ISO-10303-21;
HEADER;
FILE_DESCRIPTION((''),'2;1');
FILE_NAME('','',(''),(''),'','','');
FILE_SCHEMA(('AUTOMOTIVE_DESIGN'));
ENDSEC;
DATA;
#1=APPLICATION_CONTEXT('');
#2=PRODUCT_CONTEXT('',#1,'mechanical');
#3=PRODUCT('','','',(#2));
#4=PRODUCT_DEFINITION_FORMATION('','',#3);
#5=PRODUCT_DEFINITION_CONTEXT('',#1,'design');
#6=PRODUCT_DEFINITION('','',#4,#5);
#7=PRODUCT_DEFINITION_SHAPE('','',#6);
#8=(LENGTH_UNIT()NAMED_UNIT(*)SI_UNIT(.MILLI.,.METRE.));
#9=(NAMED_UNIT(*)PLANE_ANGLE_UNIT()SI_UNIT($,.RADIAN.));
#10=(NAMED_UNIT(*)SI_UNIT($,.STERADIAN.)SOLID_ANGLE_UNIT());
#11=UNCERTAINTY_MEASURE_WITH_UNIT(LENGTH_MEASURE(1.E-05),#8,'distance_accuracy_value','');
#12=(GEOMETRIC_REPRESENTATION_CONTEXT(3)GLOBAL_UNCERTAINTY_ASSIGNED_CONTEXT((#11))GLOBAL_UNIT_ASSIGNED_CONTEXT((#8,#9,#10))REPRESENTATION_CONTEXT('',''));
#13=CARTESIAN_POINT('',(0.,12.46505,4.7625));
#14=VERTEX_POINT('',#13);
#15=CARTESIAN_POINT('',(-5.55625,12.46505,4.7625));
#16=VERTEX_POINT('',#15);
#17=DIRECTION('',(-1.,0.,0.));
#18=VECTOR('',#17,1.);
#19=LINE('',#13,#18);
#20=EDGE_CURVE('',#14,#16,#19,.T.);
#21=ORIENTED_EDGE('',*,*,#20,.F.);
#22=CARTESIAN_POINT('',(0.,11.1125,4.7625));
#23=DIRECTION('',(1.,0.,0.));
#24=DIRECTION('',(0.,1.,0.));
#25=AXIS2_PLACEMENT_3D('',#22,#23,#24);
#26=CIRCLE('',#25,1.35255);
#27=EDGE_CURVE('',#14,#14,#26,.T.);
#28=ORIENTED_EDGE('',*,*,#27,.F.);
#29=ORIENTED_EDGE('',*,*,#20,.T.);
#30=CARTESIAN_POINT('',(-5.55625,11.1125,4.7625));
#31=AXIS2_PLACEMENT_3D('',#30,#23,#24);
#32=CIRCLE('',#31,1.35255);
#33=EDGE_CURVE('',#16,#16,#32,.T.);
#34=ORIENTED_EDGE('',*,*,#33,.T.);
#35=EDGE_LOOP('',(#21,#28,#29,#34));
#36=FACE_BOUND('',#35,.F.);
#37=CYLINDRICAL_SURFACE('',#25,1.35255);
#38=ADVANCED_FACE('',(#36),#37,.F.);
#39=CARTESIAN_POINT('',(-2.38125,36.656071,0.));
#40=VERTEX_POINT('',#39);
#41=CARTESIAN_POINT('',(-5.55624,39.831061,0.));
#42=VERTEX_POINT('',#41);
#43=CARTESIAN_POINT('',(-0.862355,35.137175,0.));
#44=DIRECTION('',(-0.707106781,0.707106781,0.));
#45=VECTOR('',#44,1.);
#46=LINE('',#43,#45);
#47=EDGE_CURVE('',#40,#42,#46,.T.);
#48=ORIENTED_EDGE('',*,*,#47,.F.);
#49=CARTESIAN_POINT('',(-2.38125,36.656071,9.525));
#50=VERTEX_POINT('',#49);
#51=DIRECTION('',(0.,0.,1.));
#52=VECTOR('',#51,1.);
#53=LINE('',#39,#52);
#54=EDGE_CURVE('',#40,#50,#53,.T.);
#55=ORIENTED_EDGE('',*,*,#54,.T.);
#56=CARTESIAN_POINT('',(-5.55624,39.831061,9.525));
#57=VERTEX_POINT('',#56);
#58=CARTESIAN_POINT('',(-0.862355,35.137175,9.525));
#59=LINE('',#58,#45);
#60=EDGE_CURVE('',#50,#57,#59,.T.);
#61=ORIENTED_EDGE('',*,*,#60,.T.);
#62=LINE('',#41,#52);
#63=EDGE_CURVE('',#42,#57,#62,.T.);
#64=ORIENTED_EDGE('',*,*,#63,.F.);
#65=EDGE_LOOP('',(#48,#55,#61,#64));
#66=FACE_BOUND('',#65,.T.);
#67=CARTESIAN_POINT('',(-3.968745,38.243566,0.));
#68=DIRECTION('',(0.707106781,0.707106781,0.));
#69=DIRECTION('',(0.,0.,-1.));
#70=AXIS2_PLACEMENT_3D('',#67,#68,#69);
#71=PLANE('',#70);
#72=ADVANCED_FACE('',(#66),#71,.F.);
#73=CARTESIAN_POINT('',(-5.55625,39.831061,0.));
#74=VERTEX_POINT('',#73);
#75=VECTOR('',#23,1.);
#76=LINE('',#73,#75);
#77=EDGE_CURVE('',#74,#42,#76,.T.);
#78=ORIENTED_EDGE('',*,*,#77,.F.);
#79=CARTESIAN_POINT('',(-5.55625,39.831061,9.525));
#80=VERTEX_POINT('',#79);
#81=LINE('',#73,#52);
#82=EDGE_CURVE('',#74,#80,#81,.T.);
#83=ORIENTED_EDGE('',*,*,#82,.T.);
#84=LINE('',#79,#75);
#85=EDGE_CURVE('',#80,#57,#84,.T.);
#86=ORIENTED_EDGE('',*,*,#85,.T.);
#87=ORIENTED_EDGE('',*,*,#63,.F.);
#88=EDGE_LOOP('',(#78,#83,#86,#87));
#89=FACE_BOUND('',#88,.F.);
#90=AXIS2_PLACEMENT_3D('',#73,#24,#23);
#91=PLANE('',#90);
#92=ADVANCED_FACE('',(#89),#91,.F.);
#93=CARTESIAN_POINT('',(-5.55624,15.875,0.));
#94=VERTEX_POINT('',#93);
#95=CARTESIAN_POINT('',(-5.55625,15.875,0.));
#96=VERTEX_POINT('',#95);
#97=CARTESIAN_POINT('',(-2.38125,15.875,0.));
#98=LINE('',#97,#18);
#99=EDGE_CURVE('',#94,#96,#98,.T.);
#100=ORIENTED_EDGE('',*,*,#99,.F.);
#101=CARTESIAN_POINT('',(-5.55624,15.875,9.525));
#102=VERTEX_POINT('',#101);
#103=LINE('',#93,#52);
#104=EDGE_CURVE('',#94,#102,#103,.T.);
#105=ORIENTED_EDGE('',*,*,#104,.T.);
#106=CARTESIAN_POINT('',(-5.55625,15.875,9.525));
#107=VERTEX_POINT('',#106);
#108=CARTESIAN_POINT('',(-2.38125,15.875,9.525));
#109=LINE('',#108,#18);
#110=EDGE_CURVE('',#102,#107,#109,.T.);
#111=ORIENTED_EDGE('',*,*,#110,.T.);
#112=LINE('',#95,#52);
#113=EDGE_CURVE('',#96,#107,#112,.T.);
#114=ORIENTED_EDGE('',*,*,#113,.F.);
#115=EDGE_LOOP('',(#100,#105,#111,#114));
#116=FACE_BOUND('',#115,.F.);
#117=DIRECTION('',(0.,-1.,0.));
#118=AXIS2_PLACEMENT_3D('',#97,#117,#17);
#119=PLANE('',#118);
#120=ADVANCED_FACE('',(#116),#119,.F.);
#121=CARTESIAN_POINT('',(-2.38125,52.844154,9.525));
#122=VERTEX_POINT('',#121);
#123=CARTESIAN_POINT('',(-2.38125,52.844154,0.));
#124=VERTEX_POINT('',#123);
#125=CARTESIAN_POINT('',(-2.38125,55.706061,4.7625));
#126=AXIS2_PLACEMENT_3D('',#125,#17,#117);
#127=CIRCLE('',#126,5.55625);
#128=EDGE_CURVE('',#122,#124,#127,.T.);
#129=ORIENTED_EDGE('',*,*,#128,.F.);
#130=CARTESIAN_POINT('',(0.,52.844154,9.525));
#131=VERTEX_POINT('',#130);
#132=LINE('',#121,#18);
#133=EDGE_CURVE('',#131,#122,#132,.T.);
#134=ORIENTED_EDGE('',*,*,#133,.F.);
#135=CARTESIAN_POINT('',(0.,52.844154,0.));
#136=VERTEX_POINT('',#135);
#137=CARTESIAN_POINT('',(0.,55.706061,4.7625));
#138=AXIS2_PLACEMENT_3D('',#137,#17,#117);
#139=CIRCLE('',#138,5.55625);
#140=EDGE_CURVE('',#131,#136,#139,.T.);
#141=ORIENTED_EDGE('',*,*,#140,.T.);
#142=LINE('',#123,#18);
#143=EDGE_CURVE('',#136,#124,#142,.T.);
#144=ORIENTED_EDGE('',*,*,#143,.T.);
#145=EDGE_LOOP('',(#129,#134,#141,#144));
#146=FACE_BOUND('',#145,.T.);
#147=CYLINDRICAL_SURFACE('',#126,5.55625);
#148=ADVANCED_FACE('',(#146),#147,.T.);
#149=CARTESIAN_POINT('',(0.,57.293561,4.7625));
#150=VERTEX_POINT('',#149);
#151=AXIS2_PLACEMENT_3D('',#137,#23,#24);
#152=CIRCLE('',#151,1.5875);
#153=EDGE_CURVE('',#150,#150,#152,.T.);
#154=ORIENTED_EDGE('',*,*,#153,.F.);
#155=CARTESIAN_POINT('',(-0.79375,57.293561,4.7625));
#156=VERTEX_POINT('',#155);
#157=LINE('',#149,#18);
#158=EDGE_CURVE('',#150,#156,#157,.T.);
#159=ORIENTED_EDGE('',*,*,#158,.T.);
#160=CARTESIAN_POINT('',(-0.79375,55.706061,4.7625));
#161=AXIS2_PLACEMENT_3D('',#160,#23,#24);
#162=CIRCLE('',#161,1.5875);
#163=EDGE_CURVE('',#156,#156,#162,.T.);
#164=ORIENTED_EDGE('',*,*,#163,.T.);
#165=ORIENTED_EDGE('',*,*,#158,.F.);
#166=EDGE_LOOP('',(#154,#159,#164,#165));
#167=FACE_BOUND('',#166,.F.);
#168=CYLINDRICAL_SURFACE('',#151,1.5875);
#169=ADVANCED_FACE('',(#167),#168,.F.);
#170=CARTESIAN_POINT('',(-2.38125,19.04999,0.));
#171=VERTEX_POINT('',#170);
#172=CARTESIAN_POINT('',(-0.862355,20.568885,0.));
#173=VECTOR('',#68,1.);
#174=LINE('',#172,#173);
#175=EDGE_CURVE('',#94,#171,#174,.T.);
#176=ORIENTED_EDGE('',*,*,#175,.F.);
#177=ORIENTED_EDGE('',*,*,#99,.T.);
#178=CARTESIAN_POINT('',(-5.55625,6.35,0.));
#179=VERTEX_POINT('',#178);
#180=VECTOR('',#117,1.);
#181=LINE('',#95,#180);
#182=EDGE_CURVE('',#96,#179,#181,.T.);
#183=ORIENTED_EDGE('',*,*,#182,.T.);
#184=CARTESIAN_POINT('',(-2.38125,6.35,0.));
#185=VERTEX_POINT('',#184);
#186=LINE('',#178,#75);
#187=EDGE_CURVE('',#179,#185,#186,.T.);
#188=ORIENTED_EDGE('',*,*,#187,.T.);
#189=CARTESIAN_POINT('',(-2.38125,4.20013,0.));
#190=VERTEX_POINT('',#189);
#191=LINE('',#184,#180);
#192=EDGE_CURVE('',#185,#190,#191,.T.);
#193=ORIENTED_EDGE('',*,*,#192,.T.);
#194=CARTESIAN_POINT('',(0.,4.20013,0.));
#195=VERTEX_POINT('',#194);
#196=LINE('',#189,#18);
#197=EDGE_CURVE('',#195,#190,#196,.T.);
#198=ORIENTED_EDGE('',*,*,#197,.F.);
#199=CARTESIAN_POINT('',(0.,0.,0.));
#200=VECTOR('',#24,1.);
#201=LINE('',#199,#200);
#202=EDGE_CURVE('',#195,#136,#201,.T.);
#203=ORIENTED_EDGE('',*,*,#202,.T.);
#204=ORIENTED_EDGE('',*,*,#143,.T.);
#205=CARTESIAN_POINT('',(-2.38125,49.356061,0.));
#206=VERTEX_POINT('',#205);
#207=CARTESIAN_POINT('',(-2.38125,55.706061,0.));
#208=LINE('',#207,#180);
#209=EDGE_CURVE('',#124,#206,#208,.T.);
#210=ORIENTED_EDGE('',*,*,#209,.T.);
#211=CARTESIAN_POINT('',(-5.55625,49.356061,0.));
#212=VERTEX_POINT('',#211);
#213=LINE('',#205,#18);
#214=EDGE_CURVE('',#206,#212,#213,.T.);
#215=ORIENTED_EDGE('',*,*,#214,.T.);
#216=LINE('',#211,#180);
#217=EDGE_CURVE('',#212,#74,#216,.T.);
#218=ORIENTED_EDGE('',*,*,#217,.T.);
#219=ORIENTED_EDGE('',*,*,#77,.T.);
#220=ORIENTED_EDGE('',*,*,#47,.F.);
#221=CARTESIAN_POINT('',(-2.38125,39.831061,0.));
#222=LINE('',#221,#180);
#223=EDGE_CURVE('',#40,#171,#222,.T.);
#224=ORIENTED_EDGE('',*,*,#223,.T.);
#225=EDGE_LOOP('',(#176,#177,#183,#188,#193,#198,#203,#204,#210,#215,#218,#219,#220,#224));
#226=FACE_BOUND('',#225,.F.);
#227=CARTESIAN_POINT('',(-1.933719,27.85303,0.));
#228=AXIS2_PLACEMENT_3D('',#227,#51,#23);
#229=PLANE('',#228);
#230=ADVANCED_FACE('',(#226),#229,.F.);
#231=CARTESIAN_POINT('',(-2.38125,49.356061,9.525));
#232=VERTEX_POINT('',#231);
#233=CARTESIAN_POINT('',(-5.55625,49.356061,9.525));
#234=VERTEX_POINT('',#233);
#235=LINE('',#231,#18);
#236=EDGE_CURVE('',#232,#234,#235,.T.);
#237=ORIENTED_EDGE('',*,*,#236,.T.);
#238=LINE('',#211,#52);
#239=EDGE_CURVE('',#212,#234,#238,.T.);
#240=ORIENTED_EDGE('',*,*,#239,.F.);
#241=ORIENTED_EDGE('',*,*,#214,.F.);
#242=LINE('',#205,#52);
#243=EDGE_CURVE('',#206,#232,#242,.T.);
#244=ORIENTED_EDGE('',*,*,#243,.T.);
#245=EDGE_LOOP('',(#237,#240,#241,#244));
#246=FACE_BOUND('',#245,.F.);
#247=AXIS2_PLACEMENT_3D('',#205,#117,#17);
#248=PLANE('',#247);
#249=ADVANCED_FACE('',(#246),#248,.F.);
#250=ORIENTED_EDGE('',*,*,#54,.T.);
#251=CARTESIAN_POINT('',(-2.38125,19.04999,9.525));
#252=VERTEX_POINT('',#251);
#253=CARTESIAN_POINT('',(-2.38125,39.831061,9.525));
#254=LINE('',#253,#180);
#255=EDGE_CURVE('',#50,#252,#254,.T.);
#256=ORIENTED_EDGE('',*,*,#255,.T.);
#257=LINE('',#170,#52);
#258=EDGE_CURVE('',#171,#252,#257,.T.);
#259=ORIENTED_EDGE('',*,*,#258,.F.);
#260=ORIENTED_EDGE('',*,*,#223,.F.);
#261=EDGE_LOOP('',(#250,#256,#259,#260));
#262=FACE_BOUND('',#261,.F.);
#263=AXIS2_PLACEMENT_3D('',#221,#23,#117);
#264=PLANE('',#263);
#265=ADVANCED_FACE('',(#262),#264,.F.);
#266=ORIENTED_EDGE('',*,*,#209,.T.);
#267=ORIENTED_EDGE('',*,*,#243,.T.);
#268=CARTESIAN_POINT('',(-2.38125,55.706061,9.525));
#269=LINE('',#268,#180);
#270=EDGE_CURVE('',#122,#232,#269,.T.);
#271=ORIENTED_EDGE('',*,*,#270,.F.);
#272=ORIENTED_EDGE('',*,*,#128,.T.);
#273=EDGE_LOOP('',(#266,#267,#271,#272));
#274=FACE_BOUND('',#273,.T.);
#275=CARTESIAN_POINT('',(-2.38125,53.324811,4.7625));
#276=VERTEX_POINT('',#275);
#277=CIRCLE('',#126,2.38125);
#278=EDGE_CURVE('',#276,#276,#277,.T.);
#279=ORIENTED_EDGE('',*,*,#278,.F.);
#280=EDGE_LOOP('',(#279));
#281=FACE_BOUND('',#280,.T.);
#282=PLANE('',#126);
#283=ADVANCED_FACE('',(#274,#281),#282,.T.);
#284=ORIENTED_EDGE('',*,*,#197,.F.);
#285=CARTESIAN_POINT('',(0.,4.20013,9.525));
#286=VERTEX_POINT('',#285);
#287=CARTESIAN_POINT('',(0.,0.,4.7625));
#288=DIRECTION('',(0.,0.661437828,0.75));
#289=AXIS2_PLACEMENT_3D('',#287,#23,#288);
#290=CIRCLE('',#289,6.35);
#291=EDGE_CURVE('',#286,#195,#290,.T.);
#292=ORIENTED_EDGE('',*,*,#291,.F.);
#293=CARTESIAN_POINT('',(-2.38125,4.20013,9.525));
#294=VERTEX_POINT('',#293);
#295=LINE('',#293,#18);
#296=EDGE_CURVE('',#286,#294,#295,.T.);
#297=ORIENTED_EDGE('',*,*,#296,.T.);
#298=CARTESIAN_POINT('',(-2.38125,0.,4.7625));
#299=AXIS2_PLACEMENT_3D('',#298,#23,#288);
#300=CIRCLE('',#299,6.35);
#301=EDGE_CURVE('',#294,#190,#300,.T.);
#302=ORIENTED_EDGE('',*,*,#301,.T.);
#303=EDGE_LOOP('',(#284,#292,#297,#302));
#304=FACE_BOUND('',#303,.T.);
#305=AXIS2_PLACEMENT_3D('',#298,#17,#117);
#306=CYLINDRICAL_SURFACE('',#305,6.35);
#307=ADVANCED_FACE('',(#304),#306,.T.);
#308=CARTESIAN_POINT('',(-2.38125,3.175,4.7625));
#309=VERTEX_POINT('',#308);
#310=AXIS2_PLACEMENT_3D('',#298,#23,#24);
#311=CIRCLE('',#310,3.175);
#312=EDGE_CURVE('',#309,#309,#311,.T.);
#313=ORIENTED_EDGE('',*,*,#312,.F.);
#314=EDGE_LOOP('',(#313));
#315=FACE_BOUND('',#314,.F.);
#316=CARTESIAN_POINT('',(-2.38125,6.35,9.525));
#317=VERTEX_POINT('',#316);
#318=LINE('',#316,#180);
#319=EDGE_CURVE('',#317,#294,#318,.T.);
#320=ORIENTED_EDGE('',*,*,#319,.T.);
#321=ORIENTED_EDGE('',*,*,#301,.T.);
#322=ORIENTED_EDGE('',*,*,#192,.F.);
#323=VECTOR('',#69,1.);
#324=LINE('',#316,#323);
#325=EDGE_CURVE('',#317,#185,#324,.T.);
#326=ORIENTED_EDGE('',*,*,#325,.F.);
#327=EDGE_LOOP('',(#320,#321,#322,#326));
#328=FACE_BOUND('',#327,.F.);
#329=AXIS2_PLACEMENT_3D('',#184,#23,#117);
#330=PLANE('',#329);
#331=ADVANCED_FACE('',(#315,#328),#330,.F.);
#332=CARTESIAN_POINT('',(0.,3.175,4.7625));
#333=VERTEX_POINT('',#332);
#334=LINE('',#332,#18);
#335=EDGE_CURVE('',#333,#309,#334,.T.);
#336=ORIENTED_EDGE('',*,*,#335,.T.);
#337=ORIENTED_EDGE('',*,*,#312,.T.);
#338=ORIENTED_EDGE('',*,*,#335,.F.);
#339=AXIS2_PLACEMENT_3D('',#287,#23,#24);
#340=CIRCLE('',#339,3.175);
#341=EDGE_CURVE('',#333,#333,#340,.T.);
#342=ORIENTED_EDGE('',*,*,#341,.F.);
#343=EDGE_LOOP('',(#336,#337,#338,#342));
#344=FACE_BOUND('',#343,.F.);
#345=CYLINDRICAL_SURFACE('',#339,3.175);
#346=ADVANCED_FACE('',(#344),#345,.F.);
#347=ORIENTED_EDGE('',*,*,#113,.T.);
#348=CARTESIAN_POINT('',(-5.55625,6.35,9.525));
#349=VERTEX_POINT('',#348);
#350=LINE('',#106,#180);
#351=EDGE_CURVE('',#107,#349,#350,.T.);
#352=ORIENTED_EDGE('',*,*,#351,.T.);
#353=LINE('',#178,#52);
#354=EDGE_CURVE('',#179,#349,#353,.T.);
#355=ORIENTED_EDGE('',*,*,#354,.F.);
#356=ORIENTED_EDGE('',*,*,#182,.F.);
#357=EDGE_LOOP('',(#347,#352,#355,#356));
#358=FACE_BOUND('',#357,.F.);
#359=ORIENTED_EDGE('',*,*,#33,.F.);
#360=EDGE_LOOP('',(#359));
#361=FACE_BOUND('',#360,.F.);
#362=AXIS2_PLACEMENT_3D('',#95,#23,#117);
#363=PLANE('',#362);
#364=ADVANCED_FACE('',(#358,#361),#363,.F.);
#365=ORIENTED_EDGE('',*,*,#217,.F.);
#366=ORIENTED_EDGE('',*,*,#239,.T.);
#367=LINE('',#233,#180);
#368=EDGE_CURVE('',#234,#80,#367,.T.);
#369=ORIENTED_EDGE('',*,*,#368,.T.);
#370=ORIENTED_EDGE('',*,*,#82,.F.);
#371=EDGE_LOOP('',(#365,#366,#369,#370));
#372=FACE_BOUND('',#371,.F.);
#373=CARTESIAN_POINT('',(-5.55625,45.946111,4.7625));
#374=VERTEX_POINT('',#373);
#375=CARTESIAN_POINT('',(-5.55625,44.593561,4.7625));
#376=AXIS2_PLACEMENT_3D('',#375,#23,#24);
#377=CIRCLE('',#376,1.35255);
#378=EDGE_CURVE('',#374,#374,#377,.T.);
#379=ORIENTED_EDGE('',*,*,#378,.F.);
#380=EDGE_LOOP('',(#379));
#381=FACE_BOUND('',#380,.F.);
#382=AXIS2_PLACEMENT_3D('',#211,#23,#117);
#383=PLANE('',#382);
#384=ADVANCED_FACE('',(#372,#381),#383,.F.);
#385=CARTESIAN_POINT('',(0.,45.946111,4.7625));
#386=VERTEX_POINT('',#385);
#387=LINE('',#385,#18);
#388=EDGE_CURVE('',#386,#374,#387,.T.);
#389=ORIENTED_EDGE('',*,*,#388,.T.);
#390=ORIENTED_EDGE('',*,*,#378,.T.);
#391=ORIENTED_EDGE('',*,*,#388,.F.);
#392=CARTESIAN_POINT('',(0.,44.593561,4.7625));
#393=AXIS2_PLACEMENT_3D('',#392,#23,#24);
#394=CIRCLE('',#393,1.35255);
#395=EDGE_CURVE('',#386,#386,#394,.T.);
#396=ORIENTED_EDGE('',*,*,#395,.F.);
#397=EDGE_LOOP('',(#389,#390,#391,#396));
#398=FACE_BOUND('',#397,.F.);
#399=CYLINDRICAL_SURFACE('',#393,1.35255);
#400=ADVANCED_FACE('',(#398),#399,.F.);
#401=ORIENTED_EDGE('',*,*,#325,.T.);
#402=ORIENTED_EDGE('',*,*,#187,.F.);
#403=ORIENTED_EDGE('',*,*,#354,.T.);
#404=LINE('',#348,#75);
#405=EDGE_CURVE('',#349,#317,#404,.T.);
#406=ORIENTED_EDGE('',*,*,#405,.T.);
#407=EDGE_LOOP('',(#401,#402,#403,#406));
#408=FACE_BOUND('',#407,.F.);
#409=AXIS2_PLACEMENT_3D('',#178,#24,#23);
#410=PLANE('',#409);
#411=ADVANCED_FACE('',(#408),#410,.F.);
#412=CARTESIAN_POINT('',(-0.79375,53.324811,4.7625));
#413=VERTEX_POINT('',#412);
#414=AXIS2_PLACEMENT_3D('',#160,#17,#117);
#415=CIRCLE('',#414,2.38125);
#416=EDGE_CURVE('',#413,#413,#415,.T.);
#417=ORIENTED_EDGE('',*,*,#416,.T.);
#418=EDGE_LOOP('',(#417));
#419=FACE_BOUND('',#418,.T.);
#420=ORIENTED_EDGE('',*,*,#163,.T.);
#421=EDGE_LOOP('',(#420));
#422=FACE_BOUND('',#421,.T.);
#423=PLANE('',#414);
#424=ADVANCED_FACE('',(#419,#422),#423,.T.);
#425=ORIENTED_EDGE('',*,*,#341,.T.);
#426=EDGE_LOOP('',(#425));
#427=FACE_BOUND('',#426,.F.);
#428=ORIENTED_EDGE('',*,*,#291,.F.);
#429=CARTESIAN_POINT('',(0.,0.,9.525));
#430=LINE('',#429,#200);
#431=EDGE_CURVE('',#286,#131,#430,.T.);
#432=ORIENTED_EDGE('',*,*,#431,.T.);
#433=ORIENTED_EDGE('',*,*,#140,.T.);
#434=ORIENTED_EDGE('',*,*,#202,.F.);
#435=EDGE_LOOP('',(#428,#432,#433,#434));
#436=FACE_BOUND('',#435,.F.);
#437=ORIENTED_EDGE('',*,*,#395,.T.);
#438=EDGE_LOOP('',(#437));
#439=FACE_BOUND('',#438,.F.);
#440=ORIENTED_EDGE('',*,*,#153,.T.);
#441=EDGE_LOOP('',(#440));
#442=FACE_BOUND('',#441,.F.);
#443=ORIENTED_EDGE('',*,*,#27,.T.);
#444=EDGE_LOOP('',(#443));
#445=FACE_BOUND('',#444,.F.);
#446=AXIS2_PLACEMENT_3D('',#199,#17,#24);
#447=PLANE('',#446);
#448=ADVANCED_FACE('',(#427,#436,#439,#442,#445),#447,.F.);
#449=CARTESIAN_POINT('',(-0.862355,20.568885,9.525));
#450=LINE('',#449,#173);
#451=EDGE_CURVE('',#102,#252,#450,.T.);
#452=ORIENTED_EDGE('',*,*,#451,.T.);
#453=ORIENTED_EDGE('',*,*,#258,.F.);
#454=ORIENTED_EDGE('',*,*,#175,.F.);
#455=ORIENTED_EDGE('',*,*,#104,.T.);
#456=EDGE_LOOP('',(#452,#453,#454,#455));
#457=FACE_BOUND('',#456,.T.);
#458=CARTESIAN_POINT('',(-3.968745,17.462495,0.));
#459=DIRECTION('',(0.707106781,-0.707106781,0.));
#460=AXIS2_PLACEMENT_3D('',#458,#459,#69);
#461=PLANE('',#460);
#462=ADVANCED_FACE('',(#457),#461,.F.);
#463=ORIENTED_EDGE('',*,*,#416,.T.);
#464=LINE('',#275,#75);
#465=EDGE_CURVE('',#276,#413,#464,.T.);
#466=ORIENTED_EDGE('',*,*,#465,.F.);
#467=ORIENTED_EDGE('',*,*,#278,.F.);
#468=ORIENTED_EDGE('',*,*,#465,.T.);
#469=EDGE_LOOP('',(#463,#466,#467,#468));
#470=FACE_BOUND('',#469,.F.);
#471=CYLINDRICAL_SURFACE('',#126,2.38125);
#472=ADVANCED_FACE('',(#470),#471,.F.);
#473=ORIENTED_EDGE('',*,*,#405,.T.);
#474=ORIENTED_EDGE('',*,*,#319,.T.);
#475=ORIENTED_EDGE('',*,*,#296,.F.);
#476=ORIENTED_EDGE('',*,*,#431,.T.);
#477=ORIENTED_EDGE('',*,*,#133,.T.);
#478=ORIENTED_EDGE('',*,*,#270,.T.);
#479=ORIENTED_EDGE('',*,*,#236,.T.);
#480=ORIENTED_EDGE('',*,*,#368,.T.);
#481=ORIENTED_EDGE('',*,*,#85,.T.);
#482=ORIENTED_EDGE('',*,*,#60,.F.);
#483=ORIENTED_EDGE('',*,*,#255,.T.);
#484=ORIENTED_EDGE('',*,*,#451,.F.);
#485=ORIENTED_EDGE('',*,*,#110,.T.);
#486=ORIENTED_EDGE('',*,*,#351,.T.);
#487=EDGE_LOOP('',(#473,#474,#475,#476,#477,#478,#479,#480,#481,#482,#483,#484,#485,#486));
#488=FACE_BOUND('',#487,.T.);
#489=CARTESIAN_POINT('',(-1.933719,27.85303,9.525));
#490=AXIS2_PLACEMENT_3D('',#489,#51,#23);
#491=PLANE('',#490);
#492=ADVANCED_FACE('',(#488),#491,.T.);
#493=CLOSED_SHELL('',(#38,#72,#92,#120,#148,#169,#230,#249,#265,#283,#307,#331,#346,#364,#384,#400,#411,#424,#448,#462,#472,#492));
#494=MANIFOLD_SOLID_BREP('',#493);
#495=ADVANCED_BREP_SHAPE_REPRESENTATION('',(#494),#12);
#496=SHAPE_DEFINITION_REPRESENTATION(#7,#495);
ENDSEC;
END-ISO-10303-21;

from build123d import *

# Parameters (mm, degrees)
F1_DEPTH = 9.525
F2_R     = 5.55625
F2_R_2   = 6.35
F3_DEPTH = 2.38125
F4_R     = 3.175
F4_R_2   = 1.35255
F4_R_3   = 1.5875
F5_DEPTH = 5.55625
F6_R     = 2.38125
F7_DEPTH = 1.5875
F8_SIZE  = 3.17499


# Not quite as in the source:
# - a fillet or chamfer is up to 0.001 mm smaller than in the source, because OpenCascade refuses the exact size


with BuildPart() as f1:
    # F0 (on Top) → F1 (new body)
    with BuildSketch(Plane.XY):
        Polygon((0, 0), (0, 55.7060608), (-2.38125, 55.7060608), (-2.38125, 49.3560608), (-5.55625, 49.3560608), (-5.55625, 39.8310608), (-2.38125, 39.8310608), (-2.38125, 15.875), (-5.55625, 15.875), (-5.55625, 6.35), (-2.38125, 6.35), (-2.38125, 0), align=None)
    extrude(amount=F1_DEPTH)

    # F2 (on face) → F3 (join, through all)
    with BuildSketch(Plane(origin=(-2.38125, 0, 0), x_dir=(0, -1, 0), z_dir=(-1, 0, 0))):
        with Locations((-55.7060608, 4.7625)):
            Circle(F2_R)
        with Locations((0, 4.7625)):
            Circle(F2_R_2)
    extrude(amount=-F3_DEPTH)

    # F4 (on face) → F5 (cut, through all)
    with BuildSketch(Plane.YZ):
        with Locations((0, 4.7625)):
            Circle(F4_R)
        with Locations((11.1125, 4.7625)):
            Circle(F4_R_2)
        with Locations((44.5935608, 4.7625)):
            Circle(F4_R_2)
        with Locations((55.7060608001, 4.7625)):
            Circle(F4_R_3)
    extrude(amount=-F5_DEPTH, mode=Mode.SUBTRACT)

    # F6 (on face) → F7 (cut)
    with BuildSketch(Plane(origin=(-2.38125, 0, 0), x_dir=(0, -1, 0), z_dir=(-1, 0, 0))):
        with Locations((-55.7060608, 4.7625)):
            Circle(F6_R)
    extrude(amount=-F7_DEPTH, mode=Mode.SUBTRACT)

    # F8 (size 3.175 in the source; OpenCascade refuses exactly that, so slightly less here)
    f8_edges = [f1.edges().sort_by_distance(p)[0] for p in [
        (-2.38125, 39.831061, 4.7625),
        (-2.38125, 15.875, 4.7625),
    ]]
    chamfer(f8_edges, length=F8_SIZE)


solid = f1.part
